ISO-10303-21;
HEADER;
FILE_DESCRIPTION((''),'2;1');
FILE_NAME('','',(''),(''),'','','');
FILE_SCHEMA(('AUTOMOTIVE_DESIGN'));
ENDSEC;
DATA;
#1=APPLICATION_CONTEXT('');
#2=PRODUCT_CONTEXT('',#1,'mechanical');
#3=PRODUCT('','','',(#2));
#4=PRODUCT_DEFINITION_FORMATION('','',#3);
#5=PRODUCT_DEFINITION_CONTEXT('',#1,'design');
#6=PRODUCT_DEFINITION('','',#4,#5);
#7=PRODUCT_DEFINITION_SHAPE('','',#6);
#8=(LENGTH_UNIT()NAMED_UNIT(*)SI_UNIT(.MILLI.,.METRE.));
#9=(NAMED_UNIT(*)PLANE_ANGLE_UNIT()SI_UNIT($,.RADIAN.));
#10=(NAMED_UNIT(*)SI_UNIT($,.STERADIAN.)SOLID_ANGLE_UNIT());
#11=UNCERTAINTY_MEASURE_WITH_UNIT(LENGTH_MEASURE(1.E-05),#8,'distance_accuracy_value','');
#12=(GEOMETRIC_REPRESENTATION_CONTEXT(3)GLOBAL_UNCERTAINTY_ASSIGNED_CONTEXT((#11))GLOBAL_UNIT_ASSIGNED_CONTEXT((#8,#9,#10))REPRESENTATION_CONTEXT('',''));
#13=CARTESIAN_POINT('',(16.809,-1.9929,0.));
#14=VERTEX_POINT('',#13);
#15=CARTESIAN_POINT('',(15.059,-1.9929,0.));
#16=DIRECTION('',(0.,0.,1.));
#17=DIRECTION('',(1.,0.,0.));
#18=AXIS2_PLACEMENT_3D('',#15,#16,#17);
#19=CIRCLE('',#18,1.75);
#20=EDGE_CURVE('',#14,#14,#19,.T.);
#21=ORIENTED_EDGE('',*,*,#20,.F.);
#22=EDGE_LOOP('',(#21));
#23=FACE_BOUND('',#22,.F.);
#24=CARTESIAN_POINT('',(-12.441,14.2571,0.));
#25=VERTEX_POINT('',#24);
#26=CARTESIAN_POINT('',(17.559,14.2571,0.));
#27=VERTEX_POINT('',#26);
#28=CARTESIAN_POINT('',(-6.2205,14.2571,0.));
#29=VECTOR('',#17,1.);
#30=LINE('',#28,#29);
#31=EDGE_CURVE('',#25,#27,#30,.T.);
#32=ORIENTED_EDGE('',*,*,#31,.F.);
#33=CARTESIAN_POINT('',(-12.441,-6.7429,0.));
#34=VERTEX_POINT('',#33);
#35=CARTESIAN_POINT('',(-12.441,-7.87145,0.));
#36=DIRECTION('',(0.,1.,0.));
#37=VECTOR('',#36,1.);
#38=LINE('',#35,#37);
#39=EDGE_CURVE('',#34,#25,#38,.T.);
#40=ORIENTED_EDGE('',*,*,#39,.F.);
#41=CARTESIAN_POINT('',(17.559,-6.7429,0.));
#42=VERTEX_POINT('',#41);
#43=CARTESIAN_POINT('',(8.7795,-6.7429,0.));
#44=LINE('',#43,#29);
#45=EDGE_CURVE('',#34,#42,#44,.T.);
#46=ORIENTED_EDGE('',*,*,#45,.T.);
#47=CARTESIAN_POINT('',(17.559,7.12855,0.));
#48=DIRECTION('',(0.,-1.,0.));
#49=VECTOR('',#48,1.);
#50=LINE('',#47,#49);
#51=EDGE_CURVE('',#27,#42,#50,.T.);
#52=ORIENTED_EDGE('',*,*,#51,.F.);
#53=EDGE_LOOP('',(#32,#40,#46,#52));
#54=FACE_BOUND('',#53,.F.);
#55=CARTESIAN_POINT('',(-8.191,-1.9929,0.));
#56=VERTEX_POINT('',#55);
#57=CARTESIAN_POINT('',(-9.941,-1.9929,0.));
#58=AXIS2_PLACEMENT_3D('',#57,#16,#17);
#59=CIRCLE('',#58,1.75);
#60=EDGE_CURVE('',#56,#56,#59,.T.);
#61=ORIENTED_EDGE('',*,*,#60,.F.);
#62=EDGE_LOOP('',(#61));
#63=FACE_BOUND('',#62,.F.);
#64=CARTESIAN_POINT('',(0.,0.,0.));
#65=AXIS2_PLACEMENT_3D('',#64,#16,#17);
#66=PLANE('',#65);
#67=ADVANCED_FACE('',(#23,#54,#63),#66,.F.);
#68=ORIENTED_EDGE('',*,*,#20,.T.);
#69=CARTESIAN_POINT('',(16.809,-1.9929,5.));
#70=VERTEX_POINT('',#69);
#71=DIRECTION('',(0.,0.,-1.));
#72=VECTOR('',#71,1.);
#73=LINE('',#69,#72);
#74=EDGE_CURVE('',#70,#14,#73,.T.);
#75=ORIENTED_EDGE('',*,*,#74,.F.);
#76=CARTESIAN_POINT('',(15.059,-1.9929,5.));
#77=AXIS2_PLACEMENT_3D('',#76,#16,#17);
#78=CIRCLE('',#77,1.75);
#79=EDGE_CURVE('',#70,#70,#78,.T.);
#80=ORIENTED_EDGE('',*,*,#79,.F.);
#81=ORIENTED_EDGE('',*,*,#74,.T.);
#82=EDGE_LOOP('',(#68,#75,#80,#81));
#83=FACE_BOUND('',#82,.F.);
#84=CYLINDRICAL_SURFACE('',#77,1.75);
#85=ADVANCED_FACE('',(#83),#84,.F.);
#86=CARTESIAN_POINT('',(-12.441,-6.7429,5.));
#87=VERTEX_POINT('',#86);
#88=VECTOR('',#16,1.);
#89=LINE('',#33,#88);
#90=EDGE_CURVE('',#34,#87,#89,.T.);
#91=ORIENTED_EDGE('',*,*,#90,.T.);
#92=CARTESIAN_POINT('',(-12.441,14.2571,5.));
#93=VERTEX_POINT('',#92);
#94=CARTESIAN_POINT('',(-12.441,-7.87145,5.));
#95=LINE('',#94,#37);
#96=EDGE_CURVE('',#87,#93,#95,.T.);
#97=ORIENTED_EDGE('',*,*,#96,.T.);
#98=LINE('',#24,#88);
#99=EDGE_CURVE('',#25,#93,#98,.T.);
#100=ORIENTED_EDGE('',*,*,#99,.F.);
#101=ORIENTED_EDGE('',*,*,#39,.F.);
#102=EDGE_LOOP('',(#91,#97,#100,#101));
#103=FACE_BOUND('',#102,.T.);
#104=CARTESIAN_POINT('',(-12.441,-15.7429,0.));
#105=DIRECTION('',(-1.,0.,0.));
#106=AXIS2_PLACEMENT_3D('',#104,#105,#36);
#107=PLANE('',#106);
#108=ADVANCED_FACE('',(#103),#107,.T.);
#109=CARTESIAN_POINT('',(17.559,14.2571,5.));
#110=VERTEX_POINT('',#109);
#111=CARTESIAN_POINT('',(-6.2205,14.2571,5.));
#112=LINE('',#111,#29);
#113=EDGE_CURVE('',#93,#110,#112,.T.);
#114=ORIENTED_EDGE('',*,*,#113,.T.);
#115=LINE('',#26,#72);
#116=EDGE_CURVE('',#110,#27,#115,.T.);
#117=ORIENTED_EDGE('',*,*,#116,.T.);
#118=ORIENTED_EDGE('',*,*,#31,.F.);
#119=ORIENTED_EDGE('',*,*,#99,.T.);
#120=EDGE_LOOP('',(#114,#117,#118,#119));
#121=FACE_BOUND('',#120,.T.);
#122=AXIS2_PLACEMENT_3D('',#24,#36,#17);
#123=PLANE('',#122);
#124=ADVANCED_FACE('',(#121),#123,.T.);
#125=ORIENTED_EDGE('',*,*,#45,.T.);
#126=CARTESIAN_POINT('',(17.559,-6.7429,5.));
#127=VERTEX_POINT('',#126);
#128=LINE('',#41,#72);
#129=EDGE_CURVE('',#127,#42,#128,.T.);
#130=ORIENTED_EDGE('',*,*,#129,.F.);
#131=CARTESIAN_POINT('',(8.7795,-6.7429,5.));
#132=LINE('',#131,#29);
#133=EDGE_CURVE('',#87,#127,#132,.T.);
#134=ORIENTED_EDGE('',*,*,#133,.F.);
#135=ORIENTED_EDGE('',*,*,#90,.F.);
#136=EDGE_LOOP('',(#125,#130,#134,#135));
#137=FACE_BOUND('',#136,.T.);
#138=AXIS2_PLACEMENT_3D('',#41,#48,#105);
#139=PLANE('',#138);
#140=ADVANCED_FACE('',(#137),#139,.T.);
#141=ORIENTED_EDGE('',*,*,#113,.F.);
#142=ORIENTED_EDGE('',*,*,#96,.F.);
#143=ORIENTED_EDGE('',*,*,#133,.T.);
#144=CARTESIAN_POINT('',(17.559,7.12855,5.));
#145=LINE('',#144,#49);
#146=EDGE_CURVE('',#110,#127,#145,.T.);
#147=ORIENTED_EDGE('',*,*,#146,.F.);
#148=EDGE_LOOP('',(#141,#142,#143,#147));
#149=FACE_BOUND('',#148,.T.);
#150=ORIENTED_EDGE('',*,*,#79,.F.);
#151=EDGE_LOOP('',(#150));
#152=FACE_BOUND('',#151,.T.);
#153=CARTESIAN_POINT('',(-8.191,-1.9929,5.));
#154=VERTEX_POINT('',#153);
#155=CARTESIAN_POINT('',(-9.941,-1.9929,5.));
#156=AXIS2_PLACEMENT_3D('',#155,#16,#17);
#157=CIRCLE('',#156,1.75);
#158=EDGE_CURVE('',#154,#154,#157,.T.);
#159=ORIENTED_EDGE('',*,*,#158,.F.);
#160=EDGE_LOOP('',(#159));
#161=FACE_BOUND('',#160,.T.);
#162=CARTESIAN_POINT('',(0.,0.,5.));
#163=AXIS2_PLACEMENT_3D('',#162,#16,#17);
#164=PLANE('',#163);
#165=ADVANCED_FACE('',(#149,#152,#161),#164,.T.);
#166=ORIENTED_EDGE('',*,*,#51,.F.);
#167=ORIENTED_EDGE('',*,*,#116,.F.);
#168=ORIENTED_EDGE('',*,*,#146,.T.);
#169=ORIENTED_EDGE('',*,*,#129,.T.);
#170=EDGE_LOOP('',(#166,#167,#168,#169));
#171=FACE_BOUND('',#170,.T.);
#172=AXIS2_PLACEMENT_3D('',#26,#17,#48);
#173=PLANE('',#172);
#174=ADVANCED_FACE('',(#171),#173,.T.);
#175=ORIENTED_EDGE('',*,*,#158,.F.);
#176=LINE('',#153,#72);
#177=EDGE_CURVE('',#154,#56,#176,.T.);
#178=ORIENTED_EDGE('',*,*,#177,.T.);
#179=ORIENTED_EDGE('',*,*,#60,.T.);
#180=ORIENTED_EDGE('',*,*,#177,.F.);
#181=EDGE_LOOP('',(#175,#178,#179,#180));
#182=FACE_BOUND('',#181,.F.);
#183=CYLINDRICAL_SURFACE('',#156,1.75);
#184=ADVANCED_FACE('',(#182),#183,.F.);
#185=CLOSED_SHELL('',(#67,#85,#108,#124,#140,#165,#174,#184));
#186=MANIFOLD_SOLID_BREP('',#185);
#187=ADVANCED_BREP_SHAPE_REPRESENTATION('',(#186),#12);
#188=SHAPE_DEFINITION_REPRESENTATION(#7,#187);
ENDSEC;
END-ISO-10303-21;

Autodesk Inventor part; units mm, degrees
ref_plane "YZ Plane" through (0, 0, 0) normal (1, 0, 0) x (0, 1, 0)
ref_plane "XZ Plane" through (0, 0, 0) normal (0, 1, 0) x (-1, 0, 0)
ref_plane "XY Plane" through (0, 0, 0) normal (0, 0, 1) x (1, 0, 0)
sketch "Boceto1" plane through (0, 0, 0) normal (0, 0, 1) x (1, 0, 0)
  line L0 (-12.441, 14.2571) -> (17.559, 14.2571)
  line L1 (17.559, 14.2571) -> (17.559, -15.7429)
  line L2 (17.559, -15.7429) -> (-12.441, -15.7429)
  line L3 (-12.441, -15.7429) -> (-12.441, 14.2571)
  point P0 (0, 0)
  dimension "d0" = 30
extrude "Extrusión1" add sketch "Boceto1" along normal blind 5
sketch "Boceto2" plane through (0, 0, 5) normal (0, 0, 1) x (1, 0, 0)
  line L0 (17.559, 14.2571) -> (17.559, -15.7429) projected
  line L1 (-12.441, 14.2571) -> (17.559, 14.2571) projected
  line L2 (-12.441, -15.7429) -> (-12.441, 14.2571) projected
  circle A0 centre (-9.941, -1.9929) radius 1.75
  circle A1 centre (15.059, -1.9929) radius 1.75
  point P0 (0, 0)
  dimension "d3" = 2.5
  dimension "d4" = 2.5
  dimension "d5" = 16.25
  dimension "d6" = 16.25
extrude "Extrusión2" cut sketch "Boceto2" against normal blind 5
move faces "Desplazar cara1" translate (0, 3, 0) faces at (7.559, -15.7429, 1.6667)
move faces "Desplazar cara2" translate (0, 5, 0) faces at (7.559, -12.7429, 1.6667)
move faces "Desplazar cara3" translate (0, 1, 0) faces at (7.559, -7.7429, 1.6667)
properties part number "tapa polea x 2"
